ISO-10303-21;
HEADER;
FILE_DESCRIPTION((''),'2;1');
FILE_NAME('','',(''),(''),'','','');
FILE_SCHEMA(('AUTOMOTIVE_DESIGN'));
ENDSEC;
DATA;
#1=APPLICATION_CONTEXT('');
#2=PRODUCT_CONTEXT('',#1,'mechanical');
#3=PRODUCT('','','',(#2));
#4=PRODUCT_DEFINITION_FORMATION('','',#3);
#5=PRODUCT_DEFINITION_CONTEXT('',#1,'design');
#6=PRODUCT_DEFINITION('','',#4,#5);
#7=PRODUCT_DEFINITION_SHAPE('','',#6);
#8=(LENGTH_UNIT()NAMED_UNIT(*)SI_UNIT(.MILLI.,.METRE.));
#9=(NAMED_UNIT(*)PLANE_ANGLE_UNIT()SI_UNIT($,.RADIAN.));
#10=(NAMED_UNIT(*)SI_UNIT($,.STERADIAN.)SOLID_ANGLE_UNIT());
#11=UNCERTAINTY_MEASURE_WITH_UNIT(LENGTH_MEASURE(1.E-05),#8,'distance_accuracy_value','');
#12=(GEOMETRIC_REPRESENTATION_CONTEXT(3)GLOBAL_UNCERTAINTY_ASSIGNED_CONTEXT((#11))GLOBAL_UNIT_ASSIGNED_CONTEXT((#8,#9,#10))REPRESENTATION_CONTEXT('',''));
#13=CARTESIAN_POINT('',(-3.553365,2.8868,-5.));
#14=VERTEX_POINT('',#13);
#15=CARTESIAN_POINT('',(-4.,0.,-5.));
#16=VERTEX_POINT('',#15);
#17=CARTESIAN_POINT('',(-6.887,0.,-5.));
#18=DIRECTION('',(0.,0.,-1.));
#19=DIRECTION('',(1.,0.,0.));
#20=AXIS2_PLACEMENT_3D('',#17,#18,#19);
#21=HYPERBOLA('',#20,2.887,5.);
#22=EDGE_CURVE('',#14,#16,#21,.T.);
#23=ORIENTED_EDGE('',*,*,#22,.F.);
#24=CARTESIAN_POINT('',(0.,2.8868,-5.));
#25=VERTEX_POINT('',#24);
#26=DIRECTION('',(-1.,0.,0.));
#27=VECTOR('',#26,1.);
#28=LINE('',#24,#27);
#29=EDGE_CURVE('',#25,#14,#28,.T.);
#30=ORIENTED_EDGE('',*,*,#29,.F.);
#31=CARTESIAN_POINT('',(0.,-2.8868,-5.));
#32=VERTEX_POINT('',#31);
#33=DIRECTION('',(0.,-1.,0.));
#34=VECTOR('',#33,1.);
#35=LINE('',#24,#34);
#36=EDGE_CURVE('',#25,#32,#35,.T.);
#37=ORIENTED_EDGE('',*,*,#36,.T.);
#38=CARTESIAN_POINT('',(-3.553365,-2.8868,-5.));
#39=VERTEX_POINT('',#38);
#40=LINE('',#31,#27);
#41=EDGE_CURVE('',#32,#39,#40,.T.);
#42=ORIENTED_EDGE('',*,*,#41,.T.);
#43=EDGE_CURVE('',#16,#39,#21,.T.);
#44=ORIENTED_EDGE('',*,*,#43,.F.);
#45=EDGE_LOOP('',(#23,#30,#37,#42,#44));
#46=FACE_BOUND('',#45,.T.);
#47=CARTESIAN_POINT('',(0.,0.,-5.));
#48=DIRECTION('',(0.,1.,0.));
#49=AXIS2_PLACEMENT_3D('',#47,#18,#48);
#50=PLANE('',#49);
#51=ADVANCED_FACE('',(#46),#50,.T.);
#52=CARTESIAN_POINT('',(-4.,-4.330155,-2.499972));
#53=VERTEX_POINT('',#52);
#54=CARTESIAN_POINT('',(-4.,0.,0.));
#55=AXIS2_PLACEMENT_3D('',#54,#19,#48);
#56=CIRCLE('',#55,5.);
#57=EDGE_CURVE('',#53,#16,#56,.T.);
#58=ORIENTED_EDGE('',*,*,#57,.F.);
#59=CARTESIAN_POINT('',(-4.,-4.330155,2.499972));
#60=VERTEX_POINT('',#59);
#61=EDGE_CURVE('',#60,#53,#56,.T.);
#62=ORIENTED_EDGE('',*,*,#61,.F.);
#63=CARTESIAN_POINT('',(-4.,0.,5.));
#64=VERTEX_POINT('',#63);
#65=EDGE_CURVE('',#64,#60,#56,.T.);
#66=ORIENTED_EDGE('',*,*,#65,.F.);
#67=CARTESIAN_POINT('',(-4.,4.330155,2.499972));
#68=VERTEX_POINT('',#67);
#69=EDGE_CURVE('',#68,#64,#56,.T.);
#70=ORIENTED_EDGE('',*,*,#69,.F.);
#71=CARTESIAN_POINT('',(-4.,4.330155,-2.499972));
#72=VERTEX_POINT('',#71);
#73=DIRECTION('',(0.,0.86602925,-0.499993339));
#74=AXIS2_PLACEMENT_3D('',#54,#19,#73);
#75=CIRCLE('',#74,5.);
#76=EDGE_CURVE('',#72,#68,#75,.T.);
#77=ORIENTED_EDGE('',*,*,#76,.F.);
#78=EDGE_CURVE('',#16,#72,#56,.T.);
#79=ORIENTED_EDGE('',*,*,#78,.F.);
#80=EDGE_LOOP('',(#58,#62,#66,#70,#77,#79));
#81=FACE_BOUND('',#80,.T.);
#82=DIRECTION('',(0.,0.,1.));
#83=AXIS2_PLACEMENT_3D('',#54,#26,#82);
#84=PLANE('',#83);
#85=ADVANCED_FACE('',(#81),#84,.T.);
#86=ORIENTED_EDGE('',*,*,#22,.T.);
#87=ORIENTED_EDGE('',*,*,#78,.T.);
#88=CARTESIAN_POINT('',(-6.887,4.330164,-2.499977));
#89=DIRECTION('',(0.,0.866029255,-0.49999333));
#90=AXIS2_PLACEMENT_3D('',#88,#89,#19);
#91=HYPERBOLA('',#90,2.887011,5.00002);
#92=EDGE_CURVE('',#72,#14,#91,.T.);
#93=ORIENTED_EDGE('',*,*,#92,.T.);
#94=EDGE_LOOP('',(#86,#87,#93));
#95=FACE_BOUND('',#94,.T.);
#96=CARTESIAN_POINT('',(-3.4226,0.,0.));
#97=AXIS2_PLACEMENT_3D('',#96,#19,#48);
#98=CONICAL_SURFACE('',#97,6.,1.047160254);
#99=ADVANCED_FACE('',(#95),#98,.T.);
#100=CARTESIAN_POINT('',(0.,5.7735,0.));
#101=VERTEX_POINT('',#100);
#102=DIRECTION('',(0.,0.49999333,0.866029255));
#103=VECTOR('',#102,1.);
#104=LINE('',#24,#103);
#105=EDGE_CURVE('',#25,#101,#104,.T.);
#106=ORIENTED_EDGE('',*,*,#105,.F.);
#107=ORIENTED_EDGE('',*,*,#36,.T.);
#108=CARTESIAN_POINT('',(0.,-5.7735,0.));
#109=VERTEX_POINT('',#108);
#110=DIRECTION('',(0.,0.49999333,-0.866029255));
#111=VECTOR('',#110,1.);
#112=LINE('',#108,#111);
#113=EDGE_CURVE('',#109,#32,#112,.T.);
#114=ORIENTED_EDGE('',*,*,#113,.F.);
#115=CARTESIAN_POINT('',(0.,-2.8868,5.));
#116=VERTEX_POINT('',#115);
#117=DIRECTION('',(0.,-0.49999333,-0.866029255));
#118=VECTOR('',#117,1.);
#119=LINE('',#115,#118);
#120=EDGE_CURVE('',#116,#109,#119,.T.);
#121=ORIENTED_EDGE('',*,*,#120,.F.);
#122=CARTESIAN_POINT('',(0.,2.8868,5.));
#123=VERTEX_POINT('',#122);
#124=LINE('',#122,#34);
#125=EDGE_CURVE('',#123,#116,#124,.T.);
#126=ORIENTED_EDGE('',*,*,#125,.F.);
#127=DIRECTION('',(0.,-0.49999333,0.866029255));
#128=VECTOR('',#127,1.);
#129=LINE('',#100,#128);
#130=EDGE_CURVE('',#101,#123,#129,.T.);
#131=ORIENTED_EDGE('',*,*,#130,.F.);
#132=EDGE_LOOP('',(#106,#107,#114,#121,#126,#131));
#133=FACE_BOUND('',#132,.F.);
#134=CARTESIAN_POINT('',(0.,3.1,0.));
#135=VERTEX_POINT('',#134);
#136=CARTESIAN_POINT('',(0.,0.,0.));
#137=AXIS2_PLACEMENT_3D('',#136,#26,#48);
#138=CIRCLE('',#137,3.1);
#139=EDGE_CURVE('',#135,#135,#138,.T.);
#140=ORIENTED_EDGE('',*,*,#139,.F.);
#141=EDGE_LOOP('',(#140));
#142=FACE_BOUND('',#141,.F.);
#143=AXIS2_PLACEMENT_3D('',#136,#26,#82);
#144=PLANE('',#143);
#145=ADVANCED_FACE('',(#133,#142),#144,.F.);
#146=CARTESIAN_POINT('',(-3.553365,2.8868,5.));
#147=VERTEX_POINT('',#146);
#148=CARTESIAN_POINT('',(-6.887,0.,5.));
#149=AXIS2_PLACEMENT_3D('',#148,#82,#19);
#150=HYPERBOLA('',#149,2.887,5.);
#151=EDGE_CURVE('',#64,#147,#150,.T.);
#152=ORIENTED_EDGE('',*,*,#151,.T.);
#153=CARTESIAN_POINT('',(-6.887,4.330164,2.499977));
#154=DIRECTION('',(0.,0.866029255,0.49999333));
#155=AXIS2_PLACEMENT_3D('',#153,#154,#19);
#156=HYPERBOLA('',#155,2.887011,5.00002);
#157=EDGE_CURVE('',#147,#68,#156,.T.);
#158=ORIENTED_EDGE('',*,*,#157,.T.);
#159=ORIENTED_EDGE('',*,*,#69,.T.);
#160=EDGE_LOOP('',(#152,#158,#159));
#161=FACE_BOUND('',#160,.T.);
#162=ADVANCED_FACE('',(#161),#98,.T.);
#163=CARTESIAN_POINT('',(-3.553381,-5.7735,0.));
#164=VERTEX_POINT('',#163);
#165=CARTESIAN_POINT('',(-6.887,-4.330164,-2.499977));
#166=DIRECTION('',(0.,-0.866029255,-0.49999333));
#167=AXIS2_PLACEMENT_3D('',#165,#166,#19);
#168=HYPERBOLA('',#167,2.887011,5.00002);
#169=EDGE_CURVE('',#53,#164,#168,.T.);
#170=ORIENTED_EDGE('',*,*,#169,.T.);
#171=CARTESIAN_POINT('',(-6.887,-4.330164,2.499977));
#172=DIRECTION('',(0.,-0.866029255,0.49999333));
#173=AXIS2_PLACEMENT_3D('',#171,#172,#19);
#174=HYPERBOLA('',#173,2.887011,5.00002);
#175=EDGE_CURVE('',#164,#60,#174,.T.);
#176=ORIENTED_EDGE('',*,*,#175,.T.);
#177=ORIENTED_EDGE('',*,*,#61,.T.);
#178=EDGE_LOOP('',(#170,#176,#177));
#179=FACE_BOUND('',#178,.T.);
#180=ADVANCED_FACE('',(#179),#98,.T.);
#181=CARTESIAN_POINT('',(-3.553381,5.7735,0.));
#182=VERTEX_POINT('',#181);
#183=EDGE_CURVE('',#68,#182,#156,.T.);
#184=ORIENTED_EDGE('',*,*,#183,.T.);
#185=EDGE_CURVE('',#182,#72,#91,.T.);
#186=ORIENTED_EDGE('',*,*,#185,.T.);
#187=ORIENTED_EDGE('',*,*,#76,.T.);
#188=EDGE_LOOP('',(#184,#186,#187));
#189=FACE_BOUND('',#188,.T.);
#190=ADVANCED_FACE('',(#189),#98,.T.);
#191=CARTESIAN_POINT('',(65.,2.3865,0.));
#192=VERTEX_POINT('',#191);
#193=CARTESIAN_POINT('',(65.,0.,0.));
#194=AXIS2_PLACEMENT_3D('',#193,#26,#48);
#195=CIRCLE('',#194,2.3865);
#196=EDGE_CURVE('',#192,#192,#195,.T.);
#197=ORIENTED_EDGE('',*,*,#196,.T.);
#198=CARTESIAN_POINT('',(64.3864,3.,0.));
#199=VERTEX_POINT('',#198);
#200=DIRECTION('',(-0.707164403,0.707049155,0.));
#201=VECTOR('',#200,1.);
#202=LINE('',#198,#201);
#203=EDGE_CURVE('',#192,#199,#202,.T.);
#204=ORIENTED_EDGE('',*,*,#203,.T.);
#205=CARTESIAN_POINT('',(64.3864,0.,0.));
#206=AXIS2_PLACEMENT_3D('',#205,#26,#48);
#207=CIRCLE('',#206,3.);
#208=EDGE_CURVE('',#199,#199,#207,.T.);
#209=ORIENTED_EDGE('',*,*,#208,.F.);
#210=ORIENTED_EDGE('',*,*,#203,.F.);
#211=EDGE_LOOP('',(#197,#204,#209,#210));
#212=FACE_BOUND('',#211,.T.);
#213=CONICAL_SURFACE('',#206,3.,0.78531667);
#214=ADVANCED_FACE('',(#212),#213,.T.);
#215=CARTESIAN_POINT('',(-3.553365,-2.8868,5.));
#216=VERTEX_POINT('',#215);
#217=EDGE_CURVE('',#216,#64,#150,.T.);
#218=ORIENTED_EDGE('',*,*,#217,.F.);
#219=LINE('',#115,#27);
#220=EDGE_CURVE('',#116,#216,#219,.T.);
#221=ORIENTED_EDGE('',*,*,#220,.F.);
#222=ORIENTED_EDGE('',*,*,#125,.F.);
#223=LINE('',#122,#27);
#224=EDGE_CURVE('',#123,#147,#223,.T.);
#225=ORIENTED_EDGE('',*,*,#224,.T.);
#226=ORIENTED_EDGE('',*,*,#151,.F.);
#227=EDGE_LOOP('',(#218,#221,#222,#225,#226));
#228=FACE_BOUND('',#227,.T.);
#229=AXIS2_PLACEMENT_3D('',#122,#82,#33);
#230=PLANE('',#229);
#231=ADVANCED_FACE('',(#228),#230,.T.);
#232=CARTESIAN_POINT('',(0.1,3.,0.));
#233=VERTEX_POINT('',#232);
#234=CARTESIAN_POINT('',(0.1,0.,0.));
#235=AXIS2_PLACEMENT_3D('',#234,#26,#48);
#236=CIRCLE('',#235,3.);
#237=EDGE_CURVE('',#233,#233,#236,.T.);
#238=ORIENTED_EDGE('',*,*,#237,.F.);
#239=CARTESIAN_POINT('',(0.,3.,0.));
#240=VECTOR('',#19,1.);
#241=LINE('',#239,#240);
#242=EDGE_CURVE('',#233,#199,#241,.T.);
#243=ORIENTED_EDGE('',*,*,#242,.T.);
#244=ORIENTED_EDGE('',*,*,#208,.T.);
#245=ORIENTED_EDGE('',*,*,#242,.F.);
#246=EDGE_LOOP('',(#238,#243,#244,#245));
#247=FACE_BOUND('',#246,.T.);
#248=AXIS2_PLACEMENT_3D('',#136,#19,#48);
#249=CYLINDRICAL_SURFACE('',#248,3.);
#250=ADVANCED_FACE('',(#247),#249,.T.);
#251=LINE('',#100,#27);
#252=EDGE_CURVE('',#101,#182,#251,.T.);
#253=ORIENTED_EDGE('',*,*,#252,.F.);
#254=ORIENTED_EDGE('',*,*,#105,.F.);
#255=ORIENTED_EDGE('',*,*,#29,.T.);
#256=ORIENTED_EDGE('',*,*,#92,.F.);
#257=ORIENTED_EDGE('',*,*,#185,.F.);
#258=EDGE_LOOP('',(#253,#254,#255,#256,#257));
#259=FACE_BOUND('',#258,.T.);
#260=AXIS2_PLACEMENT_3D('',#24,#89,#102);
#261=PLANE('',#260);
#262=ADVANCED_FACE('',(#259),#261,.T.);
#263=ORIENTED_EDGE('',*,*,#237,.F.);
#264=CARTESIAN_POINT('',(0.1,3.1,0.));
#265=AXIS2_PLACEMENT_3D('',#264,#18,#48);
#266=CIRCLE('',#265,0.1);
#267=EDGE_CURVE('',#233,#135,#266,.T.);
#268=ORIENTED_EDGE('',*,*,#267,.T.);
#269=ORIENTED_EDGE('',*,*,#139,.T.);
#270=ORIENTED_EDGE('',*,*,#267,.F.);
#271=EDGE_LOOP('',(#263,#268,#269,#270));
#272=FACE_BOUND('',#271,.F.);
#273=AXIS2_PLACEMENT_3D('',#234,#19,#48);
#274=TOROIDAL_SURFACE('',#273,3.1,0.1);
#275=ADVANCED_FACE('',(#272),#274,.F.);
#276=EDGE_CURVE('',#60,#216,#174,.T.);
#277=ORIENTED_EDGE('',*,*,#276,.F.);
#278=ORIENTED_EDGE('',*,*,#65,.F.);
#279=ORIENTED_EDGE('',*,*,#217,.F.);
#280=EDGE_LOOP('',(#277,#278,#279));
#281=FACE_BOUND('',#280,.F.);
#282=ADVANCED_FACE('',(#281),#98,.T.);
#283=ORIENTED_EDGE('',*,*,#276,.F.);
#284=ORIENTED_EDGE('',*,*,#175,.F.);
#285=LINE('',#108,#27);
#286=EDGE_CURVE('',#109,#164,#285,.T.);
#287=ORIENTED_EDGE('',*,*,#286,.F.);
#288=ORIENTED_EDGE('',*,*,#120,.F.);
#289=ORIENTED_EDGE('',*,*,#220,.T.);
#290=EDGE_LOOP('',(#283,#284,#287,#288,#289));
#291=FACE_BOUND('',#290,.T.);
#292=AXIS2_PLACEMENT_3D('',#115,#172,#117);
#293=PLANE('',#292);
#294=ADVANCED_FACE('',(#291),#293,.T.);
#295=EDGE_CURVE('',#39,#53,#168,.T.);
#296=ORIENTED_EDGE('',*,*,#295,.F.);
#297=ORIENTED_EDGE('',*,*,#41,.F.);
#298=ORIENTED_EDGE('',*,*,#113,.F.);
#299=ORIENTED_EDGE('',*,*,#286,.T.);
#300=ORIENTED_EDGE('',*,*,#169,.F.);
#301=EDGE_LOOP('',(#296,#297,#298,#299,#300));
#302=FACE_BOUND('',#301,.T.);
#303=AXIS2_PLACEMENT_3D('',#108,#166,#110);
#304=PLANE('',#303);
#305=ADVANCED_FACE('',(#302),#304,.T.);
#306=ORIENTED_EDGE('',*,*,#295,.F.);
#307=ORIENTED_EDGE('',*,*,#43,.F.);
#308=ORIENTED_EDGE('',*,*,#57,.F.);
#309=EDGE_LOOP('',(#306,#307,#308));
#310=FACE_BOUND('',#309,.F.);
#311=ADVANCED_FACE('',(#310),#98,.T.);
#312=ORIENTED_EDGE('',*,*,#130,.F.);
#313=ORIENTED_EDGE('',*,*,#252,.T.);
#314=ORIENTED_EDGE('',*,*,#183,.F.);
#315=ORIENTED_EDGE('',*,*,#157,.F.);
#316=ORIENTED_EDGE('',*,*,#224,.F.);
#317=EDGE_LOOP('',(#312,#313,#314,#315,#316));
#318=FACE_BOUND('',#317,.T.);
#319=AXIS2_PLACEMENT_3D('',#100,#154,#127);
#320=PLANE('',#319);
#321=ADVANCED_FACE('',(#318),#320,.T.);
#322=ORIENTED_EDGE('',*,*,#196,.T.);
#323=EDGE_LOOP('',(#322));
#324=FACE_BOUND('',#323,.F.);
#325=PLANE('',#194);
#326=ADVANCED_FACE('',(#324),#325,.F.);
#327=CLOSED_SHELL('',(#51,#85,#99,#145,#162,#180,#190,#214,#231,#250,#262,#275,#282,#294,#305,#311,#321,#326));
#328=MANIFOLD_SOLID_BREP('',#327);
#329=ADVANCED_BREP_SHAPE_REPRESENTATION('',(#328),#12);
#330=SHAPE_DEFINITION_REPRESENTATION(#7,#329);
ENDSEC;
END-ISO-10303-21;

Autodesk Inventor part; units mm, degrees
ref_plane "YZ Plane" through (0, 0, 0) normal (1, 0, 0) x (0, 1, 0)
ref_plane "XZ Plane" through (0, 0, 0) normal (0, 1, 0) x (-1, 0, 0)
sketch "Эскиз1" plane through (0, 0, 0) normal (0, 0, 1) x (1, 0, 0)
  line L0 (0, 3) -> (65, 3)
  line L1 (65, 3) -> (65, 0)
  line L2 (65, 0) -> (0, 0)
  line L3 (-13, 0) -> (78, 0) projected
  line L4 (0, -0.6) -> (0, 3.6) projected
  line L5 (0, 3) -> (0, 0)
  dimension "d2" = 6
  dimension "d59" = 65
revolve "Базовый элемент" add sketch "Эскиз1" angle 360 about axis through (65, 0, 0) along (-1, 0, 0)
sketch "Эскиз2" plane through (0, 0, 0) normal (-1, 0, 0) x (0, 0, 1)
  line L0 (0, 5.7735) -> (5, 2.8868)
  line L1 (5, 2.8868) -> (5, -2.8868)
  line L2 (5, -2.8868) -> (0, -5.7735)
  line L3 (0, -5.7735) -> (-5, -2.8868)
  line L4 (-5, -2.8868) -> (-5, 2.8868)
  line L5 (-5, 2.8868) -> (0, 5.7735)
  line L6 (-7, 0) -> (7, 0) projected
  line L7 (0, 8.0829) -> (0, -8.0829) projected
  point P0 (0, 0)
  point P1 (0, 0)
  dimension "d11" = 10
extrude "С головкой" add sketch "Эскиз2" along normal blind 4
sketch "Эскиз4" plane through (0, 0, 0) normal (0, 0, 1) x (1, 0, 0)
  line L0 (-3.4226, 6) -> (-4, 5)
  line L1 (-1.1, 0) -> (-0.234, 0)
  line L2 (-4.7532, 0) -> (0.5192, 0) projected
  line L3 (-4, 6) -> (-3.4226, 6)
  line L4 (-4, 5) -> (-4, 6)
  line L5 (0, 7.2) -> (0, -1.2) projected
  dimension "d65" = 10
  dimension "d67" = 30
  dimension "d68" = 12
  dimension "d69" = 4
revolve "Фаска1" cut sketch "Эскиз4" angle 360 about axis through (-1.1, 0, 0) along (1, 0, 0)
thread "Резьба" size "M6x1" class "6g" standard "ISO Metric profile" length 18
chamfer "Фаска2" distance 0.6135 distance2 0.6136 1 edges at (65, -3, 0) measured on face at (65, -0.7485, 0.6631)
fillet "Fillet2" radius 0.1 1 edges at (0, -3, 0)
ref_plane "Work Plane1" through (1.525, 0, 0) normal (0, 0, 1) x (1, 0, 0)
equation "\"d71\" = RR"
equation "\"d11\" = SW"
equation "\"d3\" = KOH"
equation "\"d15\" = GEL"
equation "\"d6\" = -0.5 * SPD + 0.5 * GD"
equation "\"d2\" = GD"
equation "\"d59\" = NLG"
equation "\"d65\" = SW"
equation "\"d67\" = ANG1"
equation "\"d68\" = 1.2 * SW"
equation "\"d69\" = KOH"
equation "\"NLG\" = 65"
equation "\"GD\" = 6"
equation "\"BDM\" = 6"
equation "\"KOH\" = 4"
equation "\"GEL\" = 18"
equation "\"SW\" = 10"
equation "\"SW0\" = 9"
equation "\"SPD\" = NND - 1.2269 * PTC"
equation "\"SD2\" = 6"
equation "\"SD\" = 0"
equation "\"ANG1\" = 30deg"
equation "\"GAL\" = 0.61345 * PTC"
equation "\"GUL\" = 0.61345 * PTC"
equation "\"RR\" = 0.1"
equation "\"RR1\" = 0.1"
equation "\"GD1\" = THREADDIA - 1.2269 * PTC"
equation "\"THREADDIA\" = 6"
equation "\"TOA\" = 30deg"
equation "\"PTC\" = 1"
equation "\"NND\" = 6"
equation "\"E0\" = 1.155 * SW"
properties part number "Болт M6-6gx65 ГОСТ 7798-70" material "Сталь, мягкая"
